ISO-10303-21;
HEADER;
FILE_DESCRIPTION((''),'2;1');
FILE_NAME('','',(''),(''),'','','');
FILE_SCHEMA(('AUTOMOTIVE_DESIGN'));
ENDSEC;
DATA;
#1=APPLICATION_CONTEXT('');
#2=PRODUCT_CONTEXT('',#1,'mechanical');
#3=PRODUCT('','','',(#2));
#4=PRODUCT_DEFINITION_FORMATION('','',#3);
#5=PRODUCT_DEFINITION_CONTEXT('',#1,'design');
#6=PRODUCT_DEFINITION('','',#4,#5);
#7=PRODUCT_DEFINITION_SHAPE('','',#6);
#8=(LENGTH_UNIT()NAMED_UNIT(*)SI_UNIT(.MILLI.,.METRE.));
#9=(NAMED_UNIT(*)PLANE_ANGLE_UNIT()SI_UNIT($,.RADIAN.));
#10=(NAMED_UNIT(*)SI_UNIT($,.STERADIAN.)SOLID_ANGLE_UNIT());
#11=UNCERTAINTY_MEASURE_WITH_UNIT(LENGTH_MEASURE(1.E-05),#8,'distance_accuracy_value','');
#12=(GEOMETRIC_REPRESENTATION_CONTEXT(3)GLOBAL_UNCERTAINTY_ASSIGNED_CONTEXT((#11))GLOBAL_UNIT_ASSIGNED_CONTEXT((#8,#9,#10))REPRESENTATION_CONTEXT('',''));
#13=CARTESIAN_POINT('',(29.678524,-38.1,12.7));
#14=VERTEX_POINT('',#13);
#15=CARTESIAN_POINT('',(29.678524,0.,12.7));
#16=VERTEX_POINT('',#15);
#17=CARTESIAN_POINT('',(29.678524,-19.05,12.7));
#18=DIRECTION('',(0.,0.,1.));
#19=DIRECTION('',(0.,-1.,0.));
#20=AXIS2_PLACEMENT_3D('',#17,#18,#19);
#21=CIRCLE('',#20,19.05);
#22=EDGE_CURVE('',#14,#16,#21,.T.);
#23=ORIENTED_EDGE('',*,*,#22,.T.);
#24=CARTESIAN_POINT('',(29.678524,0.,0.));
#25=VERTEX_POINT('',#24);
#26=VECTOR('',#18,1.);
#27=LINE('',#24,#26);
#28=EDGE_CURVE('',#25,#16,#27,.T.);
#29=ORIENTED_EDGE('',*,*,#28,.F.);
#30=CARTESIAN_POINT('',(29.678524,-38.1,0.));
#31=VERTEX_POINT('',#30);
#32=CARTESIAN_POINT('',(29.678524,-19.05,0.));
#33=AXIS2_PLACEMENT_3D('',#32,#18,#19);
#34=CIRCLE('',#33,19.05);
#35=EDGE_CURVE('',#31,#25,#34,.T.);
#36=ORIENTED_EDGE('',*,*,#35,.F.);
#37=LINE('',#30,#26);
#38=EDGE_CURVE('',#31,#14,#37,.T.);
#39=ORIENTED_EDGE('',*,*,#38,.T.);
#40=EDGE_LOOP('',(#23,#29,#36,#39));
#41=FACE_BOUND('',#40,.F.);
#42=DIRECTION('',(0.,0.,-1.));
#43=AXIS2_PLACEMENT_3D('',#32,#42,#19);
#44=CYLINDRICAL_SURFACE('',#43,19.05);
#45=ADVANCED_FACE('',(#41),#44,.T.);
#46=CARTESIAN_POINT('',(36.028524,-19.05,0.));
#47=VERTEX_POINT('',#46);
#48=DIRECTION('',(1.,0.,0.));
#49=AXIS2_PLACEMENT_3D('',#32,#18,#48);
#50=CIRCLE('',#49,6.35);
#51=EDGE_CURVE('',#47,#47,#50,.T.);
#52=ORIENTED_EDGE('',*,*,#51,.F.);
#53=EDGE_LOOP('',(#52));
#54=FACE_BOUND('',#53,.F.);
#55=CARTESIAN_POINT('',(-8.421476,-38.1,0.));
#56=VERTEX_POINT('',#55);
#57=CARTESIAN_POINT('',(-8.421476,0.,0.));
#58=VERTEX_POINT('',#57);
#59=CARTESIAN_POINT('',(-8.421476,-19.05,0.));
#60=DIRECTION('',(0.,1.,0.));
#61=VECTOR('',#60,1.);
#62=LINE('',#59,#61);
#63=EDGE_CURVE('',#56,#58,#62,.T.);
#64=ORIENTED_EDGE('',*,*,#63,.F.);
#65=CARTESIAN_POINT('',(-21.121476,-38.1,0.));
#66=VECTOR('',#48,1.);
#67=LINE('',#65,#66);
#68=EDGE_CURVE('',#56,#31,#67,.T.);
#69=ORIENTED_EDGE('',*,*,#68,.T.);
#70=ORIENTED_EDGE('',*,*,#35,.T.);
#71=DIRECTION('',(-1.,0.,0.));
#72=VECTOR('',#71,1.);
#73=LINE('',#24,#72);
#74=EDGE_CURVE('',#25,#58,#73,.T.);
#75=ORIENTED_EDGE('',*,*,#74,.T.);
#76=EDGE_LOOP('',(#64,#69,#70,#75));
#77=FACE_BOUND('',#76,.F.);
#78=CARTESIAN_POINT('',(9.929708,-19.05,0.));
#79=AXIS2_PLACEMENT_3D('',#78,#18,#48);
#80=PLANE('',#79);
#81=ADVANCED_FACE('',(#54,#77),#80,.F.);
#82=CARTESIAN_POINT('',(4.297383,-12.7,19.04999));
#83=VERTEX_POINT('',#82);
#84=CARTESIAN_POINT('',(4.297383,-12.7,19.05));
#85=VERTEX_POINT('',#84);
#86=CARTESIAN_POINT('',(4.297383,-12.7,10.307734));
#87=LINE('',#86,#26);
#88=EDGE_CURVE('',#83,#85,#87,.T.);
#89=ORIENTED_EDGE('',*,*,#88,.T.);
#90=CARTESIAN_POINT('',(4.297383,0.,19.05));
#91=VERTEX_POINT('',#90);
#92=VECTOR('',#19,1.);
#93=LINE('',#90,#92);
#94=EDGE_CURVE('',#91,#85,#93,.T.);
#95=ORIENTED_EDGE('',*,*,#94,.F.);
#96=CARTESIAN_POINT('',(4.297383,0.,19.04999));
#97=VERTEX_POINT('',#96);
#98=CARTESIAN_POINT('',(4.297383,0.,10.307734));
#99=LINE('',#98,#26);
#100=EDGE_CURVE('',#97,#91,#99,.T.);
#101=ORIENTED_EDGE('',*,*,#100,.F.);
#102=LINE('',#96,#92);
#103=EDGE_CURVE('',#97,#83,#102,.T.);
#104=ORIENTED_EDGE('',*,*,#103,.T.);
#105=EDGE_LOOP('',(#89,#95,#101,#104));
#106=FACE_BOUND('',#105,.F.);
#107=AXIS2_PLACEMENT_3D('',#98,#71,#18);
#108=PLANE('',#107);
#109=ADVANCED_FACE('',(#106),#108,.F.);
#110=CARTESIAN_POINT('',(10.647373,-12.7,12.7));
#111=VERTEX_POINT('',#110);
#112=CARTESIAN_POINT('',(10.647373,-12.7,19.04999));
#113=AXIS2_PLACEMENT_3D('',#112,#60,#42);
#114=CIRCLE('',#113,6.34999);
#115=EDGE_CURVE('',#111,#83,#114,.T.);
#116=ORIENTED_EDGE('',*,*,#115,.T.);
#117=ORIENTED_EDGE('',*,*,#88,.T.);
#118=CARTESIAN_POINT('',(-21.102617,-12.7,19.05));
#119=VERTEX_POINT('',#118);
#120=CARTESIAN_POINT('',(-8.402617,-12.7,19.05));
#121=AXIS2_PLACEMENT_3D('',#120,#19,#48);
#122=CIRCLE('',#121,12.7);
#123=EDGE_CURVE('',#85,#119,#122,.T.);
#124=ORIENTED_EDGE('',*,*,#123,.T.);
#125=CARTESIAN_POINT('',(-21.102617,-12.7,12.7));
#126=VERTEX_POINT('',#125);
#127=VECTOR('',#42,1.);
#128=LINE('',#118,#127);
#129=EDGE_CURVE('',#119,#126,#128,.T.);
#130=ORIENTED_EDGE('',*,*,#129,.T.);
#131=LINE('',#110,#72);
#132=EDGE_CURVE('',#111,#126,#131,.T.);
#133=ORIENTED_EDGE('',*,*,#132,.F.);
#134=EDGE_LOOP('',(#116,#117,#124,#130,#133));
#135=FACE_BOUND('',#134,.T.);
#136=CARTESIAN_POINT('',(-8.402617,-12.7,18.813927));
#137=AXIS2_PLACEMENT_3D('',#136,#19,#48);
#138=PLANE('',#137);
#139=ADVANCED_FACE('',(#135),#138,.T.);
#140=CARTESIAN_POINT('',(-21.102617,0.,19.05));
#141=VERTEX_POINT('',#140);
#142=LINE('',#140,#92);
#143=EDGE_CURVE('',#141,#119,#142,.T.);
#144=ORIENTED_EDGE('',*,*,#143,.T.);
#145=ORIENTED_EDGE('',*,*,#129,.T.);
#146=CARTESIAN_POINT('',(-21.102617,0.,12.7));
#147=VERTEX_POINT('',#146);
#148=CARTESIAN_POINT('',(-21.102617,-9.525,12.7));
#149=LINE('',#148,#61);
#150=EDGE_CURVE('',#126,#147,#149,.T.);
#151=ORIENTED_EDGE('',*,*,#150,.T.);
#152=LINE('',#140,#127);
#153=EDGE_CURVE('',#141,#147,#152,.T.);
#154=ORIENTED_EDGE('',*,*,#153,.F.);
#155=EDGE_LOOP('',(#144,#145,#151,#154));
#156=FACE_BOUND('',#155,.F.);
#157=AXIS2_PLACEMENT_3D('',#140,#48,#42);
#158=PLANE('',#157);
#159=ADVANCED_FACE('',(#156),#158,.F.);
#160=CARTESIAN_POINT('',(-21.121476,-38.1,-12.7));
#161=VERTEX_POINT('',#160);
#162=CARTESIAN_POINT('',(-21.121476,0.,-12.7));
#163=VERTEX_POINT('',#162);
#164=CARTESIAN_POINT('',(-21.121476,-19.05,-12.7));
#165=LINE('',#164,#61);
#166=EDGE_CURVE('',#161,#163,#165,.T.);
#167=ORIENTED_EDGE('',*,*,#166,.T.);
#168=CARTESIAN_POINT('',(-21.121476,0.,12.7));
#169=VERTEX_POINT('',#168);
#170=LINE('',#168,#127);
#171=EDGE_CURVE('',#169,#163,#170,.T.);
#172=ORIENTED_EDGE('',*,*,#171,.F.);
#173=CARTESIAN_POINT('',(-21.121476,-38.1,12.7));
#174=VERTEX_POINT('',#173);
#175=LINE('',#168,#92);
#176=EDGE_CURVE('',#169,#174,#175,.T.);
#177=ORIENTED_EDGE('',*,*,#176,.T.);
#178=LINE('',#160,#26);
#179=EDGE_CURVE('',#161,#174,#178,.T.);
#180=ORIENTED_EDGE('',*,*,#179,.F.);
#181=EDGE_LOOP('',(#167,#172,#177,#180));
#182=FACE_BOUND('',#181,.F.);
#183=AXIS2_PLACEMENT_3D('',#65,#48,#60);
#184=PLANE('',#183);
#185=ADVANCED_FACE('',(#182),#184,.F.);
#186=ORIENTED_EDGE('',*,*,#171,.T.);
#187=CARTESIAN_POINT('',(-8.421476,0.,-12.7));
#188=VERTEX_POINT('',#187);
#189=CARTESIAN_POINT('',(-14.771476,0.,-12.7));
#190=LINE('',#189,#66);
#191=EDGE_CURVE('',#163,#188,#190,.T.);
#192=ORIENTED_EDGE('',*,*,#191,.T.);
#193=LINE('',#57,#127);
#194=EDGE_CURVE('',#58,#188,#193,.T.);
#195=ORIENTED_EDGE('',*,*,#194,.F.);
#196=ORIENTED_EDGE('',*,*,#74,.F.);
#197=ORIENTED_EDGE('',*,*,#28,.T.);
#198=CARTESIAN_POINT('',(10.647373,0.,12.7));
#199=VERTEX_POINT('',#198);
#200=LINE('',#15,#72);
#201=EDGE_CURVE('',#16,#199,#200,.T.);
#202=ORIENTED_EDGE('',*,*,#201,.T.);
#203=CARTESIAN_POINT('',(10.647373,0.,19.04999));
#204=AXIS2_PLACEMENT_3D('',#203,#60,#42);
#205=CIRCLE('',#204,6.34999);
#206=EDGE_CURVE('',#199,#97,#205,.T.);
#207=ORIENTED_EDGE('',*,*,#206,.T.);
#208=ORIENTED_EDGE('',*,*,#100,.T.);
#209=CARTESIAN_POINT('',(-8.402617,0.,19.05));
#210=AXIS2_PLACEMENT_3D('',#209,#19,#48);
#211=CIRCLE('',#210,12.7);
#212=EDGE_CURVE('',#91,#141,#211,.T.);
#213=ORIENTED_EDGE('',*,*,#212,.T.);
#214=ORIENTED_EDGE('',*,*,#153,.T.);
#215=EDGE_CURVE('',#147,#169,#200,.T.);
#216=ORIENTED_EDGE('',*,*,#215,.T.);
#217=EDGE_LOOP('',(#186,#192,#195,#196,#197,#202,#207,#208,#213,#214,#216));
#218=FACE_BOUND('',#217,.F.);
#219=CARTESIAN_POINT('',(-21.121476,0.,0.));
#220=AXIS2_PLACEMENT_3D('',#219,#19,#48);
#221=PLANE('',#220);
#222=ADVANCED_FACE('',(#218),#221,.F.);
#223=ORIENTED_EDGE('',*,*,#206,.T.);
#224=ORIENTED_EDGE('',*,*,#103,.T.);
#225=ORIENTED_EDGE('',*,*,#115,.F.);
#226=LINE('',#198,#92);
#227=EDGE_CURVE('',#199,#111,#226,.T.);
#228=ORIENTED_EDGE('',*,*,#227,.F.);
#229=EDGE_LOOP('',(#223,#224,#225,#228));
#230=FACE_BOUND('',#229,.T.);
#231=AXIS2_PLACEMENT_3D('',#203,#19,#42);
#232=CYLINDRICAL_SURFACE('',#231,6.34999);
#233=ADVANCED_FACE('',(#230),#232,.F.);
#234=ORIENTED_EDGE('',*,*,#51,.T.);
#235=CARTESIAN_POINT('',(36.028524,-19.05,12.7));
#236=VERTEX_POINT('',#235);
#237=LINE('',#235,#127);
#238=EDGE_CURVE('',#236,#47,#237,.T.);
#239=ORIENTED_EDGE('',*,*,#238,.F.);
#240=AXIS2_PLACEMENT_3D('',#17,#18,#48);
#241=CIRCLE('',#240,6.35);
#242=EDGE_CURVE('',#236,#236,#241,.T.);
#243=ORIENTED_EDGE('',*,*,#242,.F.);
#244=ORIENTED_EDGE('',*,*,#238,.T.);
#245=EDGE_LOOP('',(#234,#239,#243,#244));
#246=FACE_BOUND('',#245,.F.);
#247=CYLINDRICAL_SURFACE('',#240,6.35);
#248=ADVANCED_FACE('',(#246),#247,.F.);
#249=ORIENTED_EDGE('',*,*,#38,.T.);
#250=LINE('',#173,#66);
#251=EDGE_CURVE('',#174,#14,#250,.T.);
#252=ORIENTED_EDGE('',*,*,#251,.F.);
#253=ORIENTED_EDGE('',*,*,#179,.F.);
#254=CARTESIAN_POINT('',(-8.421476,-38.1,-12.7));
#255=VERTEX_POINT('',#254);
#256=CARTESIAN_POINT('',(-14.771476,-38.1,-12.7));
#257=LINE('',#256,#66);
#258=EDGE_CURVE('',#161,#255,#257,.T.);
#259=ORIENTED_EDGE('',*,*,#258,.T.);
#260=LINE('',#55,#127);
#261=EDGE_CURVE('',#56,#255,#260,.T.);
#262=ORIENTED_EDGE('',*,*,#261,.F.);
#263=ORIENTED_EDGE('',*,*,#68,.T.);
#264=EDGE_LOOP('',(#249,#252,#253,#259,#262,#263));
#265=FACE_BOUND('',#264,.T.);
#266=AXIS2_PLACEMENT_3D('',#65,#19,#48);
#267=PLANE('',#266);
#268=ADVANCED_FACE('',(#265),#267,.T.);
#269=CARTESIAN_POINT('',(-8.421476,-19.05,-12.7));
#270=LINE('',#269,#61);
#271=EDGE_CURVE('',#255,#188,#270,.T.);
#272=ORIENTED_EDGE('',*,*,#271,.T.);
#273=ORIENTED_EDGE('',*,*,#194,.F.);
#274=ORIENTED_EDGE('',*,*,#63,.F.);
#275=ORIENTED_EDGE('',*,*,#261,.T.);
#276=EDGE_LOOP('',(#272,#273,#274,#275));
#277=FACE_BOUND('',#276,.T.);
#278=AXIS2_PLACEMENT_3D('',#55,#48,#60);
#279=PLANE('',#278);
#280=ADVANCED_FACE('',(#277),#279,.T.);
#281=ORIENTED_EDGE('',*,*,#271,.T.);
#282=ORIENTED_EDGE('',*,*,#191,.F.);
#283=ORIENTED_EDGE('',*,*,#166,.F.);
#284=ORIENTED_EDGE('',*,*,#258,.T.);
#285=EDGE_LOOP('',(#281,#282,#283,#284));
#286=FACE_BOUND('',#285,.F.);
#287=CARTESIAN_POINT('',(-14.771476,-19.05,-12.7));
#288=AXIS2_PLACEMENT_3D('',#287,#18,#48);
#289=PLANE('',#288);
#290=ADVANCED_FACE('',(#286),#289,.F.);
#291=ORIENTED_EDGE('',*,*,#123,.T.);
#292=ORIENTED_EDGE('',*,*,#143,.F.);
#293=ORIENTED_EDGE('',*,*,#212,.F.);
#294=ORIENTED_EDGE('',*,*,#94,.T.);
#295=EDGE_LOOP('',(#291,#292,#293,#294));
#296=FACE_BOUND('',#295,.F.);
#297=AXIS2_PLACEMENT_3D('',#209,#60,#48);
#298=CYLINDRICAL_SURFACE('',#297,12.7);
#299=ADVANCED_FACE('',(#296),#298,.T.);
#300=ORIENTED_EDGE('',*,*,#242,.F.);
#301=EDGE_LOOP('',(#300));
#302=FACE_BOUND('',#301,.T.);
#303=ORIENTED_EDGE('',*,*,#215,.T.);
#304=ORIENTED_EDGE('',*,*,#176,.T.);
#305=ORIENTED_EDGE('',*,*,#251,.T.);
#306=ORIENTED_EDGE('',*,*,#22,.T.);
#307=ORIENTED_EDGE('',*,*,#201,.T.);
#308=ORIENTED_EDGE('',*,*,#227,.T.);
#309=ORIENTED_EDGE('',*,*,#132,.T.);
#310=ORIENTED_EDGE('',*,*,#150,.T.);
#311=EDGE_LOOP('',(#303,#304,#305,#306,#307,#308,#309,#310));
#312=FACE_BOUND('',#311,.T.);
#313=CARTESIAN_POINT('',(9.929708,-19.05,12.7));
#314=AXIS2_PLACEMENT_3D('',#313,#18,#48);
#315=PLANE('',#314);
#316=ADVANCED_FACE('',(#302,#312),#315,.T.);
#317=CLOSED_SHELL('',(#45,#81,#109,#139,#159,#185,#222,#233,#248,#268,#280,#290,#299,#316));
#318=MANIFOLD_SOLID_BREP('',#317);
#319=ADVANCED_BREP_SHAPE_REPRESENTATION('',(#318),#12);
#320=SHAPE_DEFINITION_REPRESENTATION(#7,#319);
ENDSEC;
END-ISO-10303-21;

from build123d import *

# Parameters (mm, degrees)
F1_DEPTH = 12.7
F3_DEPTH = 12.7
F4_W     = 12.7
F4_H     = 38.1
F5_DEPTH = 12.7
F6_R     = 6.35
F7_DEPTH = 25.4
F8_R     = 6.34999


# Not quite as in the source:
# - a fillet or chamfer is up to 0.001 mm smaller than in the source, because OpenCascade refuses the exact size


with BuildPart() as f1:
    # F0 (on Top) → F1 (new body)
    with BuildSketch(Plane.XY):
        with BuildLine():
            ThreePointArc((29.6785237075, -38.1), (48.7285237075, -19.05), (29.6785237075, 0))
            Line((29.6785237075, 0), (-21.1214762925, 0))
            Line((-21.1214762925, 0), (-21.1214762925, -38.1))
            Line((-21.1214762925, -38.1), (29.6785237075, -38.1))
        make_face()
    extrude(amount=F1_DEPTH)

    # F2 (on Front) → F3 (join)
    with BuildSketch(Plane.XZ):
        with BuildLine():
            Line((-21.1026167169, 19.05), (-21.1026167169, 10.3077341521))
            Line((-21.1026167169, 10.3077341521), (4.2973832831, 10.3077341521))
            Line((4.2973832831, 10.3077341521), (4.2973832831, 19.05))
            ThreePointArc((4.2973832831, 19.05), (-8.4026167169, 31.75), (-21.1026167169, 19.05))
        make_face()
    extrude(amount=F3_DEPTH)

    # F4 (on face) → F5 (join)
    with BuildSketch(Plane.XY):
        with Locations((-14.7714762925, -19.05)):
            Rectangle(F4_W, F4_H)
    extrude(amount=-F5_DEPTH)

    # F6 (on face) → F7 (cut)
    with BuildSketch(Plane.XY.offset(12.7)):
        with Locations((29.6785237075, -19.05)):
            Circle(F6_R)
    extrude(amount=-F7_DEPTH, mode=Mode.SUBTRACT)

    # F8 (radius 6.35 in the source; OpenCascade refuses exactly that, so slightly less here)
    f8_edges = [f1.edges().sort_by_distance(p)[0] for p in [
        (4.297383, -6.35, 12.7),
    ]]
    fillet(f8_edges, radius=F8_R)


solid = f1.part
